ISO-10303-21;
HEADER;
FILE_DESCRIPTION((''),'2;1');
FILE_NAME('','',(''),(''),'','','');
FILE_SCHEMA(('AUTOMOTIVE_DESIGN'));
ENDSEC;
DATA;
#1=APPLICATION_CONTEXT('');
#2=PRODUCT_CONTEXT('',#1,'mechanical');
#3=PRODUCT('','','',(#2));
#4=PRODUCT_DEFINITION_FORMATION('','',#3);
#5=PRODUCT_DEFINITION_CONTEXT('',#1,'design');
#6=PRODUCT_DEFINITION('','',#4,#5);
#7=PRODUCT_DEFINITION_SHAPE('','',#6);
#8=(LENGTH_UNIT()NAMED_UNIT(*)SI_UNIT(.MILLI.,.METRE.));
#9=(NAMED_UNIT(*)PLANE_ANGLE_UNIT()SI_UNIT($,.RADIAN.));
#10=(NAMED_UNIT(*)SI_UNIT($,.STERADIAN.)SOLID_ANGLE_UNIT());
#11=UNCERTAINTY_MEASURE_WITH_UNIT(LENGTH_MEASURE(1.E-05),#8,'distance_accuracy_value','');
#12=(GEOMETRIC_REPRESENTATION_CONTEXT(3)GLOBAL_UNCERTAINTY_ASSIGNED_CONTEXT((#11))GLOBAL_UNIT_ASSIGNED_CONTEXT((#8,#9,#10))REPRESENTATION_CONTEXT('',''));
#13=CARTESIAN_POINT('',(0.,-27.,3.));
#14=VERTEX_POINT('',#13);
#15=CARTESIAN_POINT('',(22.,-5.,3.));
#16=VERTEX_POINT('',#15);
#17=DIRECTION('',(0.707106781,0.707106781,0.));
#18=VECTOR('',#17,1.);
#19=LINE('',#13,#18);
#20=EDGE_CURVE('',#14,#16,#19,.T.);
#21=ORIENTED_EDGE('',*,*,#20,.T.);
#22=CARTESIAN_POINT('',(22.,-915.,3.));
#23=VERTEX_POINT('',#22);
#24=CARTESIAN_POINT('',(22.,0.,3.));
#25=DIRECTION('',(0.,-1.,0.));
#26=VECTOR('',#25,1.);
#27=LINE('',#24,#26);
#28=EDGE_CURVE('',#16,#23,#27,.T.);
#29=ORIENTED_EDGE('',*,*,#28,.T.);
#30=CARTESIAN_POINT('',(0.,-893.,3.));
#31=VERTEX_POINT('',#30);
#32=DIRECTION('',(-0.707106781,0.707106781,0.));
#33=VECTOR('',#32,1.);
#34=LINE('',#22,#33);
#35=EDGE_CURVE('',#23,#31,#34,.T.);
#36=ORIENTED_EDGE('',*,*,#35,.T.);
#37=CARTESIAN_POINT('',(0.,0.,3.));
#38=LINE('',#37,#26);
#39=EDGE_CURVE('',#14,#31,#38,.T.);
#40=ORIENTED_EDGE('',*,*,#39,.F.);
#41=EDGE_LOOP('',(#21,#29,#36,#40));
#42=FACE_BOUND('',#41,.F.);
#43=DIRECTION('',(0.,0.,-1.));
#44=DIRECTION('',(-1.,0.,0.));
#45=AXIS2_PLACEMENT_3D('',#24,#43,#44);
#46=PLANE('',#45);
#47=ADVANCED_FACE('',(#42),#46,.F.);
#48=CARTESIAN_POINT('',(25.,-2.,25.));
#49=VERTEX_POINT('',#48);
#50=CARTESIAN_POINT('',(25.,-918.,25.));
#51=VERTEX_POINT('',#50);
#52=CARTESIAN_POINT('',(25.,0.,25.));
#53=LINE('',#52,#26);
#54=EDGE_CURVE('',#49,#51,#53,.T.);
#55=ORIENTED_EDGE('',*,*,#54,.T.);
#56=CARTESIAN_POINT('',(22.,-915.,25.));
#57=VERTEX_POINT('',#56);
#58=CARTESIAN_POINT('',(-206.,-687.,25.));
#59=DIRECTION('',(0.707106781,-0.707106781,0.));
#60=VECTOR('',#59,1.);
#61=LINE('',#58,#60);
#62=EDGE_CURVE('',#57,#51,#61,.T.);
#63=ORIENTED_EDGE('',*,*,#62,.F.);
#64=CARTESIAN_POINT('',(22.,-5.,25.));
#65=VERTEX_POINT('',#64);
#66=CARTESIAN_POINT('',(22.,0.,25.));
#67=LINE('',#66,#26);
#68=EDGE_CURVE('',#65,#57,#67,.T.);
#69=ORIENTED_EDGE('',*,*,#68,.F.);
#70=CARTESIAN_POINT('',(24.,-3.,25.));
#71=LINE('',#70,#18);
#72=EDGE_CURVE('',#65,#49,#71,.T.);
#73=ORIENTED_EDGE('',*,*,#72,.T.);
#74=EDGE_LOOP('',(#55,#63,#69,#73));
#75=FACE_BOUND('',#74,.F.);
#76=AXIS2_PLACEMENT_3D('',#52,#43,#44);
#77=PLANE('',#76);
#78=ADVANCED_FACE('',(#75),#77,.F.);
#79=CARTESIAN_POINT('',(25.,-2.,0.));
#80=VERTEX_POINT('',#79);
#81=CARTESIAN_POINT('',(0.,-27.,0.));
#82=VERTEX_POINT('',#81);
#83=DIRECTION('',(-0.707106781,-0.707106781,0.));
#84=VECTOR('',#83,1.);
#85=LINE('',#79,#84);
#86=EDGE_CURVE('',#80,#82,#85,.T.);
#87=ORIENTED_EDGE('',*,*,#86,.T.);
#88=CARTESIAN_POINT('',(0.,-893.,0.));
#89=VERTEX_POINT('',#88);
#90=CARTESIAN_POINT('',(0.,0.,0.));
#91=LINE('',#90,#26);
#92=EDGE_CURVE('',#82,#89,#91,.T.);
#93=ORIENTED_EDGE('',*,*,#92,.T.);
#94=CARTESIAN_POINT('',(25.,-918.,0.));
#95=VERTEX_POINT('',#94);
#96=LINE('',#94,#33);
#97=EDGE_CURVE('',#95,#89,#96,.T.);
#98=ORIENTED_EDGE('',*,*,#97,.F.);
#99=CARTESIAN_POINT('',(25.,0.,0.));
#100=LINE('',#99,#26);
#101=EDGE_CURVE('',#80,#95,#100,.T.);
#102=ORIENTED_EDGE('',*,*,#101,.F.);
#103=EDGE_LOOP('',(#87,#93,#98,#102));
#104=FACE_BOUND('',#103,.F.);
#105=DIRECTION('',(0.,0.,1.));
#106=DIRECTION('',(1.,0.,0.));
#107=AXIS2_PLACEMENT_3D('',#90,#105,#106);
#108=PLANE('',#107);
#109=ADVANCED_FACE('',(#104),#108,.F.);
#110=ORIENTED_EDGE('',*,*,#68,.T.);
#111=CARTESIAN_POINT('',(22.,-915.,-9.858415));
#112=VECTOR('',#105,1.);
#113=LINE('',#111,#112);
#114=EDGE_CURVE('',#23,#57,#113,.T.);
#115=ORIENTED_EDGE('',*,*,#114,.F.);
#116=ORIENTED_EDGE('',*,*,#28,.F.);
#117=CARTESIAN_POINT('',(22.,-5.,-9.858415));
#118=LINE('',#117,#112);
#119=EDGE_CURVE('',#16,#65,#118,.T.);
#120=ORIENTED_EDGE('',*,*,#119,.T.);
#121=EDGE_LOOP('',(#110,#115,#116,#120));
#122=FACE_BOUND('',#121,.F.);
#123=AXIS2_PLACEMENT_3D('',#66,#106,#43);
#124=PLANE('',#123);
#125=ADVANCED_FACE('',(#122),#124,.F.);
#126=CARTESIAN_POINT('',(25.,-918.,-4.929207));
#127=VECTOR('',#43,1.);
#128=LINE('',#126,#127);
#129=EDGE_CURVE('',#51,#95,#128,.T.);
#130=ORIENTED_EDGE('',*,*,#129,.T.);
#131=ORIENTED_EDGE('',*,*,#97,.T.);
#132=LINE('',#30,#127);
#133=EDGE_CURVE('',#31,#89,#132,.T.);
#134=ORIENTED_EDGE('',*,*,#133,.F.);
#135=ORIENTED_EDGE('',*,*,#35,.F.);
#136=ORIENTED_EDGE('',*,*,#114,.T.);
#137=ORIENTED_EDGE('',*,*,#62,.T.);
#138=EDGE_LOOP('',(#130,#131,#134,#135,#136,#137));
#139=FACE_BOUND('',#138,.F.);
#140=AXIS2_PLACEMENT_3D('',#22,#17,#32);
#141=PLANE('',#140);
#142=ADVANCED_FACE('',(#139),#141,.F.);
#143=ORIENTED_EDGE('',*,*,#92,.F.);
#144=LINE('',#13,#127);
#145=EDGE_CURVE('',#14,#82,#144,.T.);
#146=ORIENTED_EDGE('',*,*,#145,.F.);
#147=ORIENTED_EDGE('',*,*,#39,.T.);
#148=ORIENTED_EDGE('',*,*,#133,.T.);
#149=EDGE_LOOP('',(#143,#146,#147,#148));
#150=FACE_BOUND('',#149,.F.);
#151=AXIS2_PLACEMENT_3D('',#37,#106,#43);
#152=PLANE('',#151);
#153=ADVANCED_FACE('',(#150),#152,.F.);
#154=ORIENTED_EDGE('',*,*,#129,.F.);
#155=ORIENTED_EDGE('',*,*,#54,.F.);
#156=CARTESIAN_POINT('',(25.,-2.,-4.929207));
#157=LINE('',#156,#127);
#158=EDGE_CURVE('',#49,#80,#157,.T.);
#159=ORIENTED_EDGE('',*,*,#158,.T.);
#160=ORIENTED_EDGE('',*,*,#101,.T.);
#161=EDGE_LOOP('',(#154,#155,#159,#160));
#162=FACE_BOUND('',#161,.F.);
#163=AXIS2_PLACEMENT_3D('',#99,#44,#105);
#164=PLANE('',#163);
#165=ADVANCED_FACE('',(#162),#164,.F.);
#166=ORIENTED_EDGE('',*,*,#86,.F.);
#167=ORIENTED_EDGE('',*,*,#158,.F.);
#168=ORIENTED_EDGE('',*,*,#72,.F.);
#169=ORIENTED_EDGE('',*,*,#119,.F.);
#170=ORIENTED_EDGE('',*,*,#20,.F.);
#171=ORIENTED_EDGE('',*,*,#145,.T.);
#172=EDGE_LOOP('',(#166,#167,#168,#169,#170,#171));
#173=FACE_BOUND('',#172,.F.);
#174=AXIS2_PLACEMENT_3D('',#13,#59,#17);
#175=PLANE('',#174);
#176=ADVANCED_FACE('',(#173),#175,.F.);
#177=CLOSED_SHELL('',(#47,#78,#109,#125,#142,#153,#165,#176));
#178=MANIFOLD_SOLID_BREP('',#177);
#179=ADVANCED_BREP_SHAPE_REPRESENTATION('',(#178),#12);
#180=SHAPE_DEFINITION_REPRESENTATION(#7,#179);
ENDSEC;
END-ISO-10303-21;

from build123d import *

# Parameters (mm, degrees)
F1_DEPTH    = 920
F2_T1_DEPTH = 47.7168298797
F4_DEPTH    = 25
F5_T1_DEPTH = 47.7168298797
F7_DEPTH    = 25


# Not quite as in the source:
# - a fillet or chamfer that OpenCascade refuses, or shapes differently, is made with other operations: its cross-section is extruded or revolved along the edge and cut away or added


with BuildPart() as f1:
    # F0 (on Front) → F1 (new body)
    with BuildSketch(Plane.XZ):
        Polygon((0, 3), (0, 0), (25, 0), (25, 25), (22, 25), (22, 3), align=None)
    extrude(amount=F1_DEPTH)

    # F2: chamfer of 5 on 1 edges, made by hand

    # F2_s2 → F2_t1 (cut)
    with BuildSketch(Plane.XY.offset(-9.8584149398)):
        Polygon((22, -5), (27, 0), (22, 0), align=None)
    extrude(amount=F2_T1_DEPTH, mode=Mode.SUBTRACT)

    # F3 (on face) → F4 (cut)
    with BuildSketch(Plane.XY.offset(3)):
        Polygon((0, -27), (22, -5), (22, 0), (0, 0), align=None)
    extrude(amount=-F4_DEPTH, mode=Mode.SUBTRACT)

    # F5: chamfer of 5 on 1 edges, made by hand

    # F5_s2 → F5_t1 (cut)
    with BuildSketch(Plane.XY.offset(-9.8584149398)):
        Polygon((22, -915), (27, -920), (22, -920), align=None)
    extrude(amount=F5_T1_DEPTH, mode=Mode.SUBTRACT)

    # F6 (on face) → F7 (cut)
    with BuildSketch(Plane.XY.offset(3)):
        Polygon((22, -920), (22, -915), (0, -893), (0, -920), align=None)
    extrude(amount=-F7_DEPTH, mode=Mode.SUBTRACT)


solid = f1.part
